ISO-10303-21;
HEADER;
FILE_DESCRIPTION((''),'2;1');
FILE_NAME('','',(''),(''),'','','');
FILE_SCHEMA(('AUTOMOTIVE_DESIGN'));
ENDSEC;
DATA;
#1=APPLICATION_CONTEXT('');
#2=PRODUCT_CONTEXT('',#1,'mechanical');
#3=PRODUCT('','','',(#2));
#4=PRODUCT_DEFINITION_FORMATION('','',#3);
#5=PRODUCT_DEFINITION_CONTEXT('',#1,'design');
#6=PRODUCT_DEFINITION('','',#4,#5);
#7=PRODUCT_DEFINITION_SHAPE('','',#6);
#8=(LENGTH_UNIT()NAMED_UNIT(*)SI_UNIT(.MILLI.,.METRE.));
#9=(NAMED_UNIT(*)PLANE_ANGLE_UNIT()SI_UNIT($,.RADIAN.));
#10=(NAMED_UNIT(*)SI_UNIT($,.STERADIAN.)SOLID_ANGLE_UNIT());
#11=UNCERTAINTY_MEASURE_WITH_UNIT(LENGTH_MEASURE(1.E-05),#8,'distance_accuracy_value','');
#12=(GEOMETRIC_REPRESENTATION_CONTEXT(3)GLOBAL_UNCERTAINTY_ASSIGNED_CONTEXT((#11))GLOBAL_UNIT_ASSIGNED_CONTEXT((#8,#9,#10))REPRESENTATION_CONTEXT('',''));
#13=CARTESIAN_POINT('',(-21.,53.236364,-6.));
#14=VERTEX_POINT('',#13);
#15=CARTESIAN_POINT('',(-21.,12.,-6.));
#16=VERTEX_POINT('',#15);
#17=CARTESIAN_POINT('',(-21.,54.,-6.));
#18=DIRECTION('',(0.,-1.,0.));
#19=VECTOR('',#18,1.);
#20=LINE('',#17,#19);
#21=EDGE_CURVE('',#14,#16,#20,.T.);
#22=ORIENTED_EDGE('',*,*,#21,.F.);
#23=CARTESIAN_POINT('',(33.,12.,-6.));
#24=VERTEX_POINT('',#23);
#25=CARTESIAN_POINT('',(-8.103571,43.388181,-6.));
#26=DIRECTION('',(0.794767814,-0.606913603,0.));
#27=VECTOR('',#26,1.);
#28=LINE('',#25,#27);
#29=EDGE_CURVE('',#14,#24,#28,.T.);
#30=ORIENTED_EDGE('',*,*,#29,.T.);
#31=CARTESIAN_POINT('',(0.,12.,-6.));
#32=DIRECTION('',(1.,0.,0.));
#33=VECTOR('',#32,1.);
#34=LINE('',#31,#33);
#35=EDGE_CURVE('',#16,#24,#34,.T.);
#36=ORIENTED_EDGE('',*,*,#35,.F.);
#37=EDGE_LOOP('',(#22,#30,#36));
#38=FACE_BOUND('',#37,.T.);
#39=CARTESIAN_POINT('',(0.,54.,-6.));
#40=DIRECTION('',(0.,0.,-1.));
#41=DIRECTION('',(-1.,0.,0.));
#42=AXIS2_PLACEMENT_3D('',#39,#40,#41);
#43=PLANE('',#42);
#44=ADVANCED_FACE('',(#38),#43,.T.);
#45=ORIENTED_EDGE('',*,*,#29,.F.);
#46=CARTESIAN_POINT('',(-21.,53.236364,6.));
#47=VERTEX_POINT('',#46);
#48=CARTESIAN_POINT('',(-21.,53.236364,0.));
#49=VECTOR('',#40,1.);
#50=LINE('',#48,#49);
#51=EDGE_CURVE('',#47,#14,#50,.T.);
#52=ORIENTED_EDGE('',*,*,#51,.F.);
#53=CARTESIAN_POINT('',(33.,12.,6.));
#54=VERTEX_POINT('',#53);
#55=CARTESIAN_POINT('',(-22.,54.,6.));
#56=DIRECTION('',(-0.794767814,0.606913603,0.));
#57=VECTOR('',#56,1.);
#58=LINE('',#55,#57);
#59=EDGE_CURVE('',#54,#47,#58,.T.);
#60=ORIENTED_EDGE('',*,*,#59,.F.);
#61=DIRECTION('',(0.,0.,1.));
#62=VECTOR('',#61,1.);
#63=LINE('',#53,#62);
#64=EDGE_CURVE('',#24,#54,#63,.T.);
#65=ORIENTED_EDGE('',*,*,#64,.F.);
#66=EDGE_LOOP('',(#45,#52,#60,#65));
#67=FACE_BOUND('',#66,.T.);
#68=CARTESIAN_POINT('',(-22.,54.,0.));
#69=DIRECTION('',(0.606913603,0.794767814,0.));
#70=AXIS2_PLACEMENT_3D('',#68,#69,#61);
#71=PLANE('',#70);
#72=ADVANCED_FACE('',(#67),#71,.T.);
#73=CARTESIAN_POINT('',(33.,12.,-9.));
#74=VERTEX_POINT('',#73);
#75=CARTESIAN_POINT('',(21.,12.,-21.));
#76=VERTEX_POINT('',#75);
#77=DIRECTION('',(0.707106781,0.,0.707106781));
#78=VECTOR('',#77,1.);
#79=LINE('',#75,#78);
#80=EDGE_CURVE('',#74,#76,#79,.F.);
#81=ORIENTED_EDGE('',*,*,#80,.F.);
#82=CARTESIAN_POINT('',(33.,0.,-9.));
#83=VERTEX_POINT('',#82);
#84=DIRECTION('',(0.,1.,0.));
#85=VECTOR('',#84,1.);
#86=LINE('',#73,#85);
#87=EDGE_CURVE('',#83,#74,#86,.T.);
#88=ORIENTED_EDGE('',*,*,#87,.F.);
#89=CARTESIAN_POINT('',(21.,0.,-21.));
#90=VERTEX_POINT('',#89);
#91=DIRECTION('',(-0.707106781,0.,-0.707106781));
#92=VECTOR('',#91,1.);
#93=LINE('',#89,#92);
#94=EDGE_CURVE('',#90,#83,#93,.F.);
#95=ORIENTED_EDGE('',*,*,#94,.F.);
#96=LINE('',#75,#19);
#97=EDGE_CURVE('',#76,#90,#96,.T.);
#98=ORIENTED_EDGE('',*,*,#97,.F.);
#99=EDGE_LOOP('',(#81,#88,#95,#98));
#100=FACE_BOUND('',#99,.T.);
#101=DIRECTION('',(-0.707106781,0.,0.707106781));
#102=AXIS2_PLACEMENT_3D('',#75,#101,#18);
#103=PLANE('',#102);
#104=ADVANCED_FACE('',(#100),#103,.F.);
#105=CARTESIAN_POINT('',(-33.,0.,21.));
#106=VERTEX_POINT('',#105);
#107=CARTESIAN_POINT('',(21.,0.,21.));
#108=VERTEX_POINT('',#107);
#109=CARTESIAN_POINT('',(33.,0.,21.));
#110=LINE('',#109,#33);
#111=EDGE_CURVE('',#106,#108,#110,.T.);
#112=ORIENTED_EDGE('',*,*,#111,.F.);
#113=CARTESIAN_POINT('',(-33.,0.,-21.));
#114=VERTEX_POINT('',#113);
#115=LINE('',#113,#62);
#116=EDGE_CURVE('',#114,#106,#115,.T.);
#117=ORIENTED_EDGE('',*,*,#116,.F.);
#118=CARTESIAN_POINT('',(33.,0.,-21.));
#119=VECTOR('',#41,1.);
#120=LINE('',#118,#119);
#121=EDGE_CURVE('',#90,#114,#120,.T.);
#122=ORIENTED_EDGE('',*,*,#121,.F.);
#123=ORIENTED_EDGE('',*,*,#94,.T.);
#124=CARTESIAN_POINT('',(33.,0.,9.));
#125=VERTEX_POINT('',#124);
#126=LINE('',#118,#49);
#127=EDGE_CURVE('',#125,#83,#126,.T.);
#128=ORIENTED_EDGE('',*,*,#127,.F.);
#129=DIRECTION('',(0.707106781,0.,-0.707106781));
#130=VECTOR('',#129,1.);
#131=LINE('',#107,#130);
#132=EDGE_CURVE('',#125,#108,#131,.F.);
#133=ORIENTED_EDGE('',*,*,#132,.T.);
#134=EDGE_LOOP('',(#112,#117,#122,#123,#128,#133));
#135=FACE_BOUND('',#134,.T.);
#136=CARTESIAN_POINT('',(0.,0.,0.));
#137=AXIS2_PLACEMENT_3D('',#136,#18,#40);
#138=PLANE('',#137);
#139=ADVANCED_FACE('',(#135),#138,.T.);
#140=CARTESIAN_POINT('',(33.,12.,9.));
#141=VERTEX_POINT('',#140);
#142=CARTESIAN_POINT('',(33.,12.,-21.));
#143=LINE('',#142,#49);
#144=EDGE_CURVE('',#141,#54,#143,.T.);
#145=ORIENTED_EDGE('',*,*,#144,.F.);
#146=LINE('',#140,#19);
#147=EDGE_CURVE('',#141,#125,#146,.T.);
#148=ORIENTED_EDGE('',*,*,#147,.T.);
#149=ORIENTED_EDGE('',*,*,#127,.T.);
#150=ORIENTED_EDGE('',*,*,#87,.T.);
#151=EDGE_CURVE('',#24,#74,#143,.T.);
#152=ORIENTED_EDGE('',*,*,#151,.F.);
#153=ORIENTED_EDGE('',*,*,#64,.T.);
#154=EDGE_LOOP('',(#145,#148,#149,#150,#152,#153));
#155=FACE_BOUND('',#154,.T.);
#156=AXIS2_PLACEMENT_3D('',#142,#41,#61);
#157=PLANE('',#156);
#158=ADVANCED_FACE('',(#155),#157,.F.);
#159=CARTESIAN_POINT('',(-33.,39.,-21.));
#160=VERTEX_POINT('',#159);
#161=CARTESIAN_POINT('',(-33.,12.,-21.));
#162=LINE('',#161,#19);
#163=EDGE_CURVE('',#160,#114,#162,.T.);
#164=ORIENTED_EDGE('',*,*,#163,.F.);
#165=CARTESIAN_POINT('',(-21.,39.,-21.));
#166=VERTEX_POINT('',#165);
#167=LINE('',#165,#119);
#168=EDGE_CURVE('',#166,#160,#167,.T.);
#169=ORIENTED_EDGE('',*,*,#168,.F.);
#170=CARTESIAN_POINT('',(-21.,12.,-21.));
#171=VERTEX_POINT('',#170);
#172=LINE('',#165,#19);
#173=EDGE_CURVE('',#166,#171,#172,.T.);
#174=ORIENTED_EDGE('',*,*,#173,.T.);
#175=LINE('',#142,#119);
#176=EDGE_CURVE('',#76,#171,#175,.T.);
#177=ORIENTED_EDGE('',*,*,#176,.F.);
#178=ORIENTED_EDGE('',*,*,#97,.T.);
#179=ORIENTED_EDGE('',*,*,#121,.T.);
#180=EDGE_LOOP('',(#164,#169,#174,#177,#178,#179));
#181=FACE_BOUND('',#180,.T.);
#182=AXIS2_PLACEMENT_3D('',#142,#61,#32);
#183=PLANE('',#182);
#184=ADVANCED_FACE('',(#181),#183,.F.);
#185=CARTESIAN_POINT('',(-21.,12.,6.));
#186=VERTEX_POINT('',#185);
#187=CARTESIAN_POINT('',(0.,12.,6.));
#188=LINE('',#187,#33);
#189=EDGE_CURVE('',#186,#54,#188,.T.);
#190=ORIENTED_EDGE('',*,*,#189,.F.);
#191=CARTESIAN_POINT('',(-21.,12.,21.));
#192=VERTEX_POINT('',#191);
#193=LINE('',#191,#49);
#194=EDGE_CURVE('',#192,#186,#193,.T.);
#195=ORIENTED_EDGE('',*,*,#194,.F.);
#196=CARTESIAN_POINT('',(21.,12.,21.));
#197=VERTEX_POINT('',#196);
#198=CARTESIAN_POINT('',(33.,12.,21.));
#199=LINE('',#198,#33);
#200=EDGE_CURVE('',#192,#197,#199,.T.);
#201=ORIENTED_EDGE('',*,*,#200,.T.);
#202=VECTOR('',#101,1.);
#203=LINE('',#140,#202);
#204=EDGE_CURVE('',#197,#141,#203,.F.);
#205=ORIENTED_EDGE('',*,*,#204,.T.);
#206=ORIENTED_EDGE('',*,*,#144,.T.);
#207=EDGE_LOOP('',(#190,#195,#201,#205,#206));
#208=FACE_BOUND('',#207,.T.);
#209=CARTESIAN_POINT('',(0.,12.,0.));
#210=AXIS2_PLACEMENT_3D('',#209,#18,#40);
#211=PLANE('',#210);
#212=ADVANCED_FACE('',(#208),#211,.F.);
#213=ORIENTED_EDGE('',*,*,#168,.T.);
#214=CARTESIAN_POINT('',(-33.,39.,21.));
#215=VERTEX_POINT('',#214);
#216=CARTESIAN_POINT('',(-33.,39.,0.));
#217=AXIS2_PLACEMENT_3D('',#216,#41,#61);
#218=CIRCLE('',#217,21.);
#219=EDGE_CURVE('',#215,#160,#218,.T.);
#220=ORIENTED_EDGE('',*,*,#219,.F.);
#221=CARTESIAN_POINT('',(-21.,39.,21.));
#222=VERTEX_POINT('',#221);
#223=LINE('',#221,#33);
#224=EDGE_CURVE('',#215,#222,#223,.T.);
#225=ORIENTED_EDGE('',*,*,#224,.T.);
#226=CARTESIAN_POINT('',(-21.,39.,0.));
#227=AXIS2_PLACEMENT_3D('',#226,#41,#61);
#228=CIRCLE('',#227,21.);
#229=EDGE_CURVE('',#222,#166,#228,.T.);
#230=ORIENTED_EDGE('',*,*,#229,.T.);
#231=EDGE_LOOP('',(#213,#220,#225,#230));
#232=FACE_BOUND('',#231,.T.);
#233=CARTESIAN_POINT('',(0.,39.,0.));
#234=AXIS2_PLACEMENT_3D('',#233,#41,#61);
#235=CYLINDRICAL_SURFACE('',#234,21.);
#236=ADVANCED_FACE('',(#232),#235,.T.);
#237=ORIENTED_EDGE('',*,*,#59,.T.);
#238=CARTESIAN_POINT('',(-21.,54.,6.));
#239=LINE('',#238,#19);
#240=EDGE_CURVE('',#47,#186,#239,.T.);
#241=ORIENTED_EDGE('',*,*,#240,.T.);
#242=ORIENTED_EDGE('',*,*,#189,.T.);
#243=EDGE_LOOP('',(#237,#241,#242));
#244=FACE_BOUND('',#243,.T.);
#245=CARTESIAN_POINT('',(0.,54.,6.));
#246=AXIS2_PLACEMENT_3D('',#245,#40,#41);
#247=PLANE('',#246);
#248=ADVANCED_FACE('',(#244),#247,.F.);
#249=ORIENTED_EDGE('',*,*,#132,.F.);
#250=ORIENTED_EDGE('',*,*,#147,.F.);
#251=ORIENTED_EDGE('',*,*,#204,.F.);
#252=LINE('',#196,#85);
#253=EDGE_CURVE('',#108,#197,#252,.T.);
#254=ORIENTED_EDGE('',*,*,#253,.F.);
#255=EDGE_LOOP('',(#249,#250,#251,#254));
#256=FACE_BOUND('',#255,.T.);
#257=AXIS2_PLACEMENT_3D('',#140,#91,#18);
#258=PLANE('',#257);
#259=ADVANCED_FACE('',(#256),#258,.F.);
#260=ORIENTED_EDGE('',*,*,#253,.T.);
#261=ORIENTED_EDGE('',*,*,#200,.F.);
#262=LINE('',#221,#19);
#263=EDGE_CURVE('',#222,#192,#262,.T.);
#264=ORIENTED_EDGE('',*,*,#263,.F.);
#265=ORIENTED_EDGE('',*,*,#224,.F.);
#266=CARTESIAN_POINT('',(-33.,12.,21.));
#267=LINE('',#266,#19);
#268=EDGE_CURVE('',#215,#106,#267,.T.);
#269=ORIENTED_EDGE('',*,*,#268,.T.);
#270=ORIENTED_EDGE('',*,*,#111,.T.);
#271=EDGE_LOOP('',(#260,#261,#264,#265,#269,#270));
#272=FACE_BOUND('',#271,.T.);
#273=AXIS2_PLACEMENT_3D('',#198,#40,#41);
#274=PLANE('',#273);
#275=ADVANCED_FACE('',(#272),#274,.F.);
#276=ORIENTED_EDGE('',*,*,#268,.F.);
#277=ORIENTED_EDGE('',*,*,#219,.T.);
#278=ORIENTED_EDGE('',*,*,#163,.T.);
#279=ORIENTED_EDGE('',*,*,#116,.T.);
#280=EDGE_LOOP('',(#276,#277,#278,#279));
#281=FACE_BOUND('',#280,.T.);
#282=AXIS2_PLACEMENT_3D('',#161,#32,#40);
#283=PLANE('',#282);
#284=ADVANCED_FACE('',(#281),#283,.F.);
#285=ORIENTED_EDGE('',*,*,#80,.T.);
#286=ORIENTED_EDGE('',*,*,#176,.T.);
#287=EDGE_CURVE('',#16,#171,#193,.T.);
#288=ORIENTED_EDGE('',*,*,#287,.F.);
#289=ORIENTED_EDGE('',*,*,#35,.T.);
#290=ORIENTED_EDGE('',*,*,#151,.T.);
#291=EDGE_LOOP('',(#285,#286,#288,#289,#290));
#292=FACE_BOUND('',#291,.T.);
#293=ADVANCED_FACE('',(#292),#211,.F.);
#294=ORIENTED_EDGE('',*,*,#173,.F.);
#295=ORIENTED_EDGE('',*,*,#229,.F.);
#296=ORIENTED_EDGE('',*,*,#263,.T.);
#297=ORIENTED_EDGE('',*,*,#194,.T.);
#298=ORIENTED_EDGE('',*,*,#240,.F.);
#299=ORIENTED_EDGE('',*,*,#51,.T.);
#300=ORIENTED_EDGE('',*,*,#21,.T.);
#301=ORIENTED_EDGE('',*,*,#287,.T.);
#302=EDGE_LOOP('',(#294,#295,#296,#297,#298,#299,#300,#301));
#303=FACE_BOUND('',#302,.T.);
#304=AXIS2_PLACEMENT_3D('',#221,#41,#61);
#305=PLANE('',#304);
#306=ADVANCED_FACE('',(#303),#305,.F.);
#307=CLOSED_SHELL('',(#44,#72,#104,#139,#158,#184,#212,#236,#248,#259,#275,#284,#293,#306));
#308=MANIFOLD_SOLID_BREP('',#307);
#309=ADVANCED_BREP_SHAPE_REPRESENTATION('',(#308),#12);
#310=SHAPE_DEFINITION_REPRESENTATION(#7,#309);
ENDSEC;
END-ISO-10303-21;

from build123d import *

# Parameters (mm, degrees)
SKETCH1_W           = 66
SKETCH1_H           = 42
BOSS_EXTRUDE1_DEPTH = 12
CHAMFER1_SIZE       = 12
CHAMFER2_SIZE       = 12
SKETCH2_W           = 54
SKETCH2_H           = 12
BOSS_EXTRUDE2_DEPTH = 42
CHAMFER3_SIZE       = 42
CHAMFER3_SIZE_2     = 55
SKETCH4_W           = 12
SKETCH4_H           = 42
BOSS_EXTRUDE3_DEPTH = 27
SKETCH7_W           = 12
SKETCH7_H           = 21
REVOLVE1_ANGLE      = 181


with BuildPart() as part:
    # Sketch1 → Boss-Extrude1 (new body)
    with BuildSketch(Plane(origin=(0, 0, 0), x_dir=(1, 0, 0), z_dir=(0, 1, 0))):
        Rectangle(SKETCH1_W, SKETCH1_H)
    extrude(amount=BOSS_EXTRUDE1_DEPTH)

    # Chamfer1
    chamfer1_edges = [part.edges().sort_by_distance(p)[0] for p in [
        (33, 6, 21),
    ]]
    chamfer(chamfer1_edges, length=CHAMFER1_SIZE)

    # Chamfer2
    chamfer2_edges = [part.edges().sort_by_distance(p)[0] for p in [
        (33, 6, -21),
    ]]
    chamfer(chamfer2_edges, length=CHAMFER2_SIZE)

    # Sketch2 → Boss-Extrude2 (add)
    with BuildSketch(Plane(origin=(0, 12, 0), x_dir=(1, 0, 0), z_dir=(0, 1, 0))):
        with Locations((6, 0)):
            Rectangle(SKETCH2_W, SKETCH2_H)
    extrude(amount=BOSS_EXTRUDE2_DEPTH)

    # Chamfer3
    # the kernel refuses this chamfer: 55, 42 mm, written as the material it takes off along each edge
    with BuildSketch(Plane(origin=(33, 54, 147.910486993), x_dir=(0.04031520079207804, -0.9991870118176548, 0), z_dir=(0, 0, -1))) as chamfer3_piece_1:
        Polygon((CHAMFER3_SIZE * 0.999187011818, CHAMFER3_SIZE * 0.0403152007921), (-CHAMFER3_SIZE_2 * 0.0403152007921, CHAMFER3_SIZE_2 * 0.999187011818), (0, 0), align=None)
    extrude(amount=295.820973986, mode=Mode.SUBTRACT)

    # Sketch4 → Boss-Extrude3 (add)
    with BuildSketch(Plane(origin=(0, 12, 0), x_dir=(1, 0, 0), z_dir=(0, 1, 0))):
        with Locations((-27, 0)):
            Rectangle(SKETCH4_W, SKETCH4_H)
    extrude(amount=BOSS_EXTRUDE3_DEPTH)

    # Sketch7 → Revolve1 (revolve)
    with BuildSketch(Plane(origin=(0, 39, 0), x_dir=(1, 0, 0), z_dir=(0, 1, 0))):
        with Locations((-27, 10.5)):
            Rectangle(SKETCH7_W, SKETCH7_H)
    revolve(axis=Axis((0, 39, 0), (1, 0, 0)), revolution_arc=REVOLVE1_ANGLE)


solid = part.part
